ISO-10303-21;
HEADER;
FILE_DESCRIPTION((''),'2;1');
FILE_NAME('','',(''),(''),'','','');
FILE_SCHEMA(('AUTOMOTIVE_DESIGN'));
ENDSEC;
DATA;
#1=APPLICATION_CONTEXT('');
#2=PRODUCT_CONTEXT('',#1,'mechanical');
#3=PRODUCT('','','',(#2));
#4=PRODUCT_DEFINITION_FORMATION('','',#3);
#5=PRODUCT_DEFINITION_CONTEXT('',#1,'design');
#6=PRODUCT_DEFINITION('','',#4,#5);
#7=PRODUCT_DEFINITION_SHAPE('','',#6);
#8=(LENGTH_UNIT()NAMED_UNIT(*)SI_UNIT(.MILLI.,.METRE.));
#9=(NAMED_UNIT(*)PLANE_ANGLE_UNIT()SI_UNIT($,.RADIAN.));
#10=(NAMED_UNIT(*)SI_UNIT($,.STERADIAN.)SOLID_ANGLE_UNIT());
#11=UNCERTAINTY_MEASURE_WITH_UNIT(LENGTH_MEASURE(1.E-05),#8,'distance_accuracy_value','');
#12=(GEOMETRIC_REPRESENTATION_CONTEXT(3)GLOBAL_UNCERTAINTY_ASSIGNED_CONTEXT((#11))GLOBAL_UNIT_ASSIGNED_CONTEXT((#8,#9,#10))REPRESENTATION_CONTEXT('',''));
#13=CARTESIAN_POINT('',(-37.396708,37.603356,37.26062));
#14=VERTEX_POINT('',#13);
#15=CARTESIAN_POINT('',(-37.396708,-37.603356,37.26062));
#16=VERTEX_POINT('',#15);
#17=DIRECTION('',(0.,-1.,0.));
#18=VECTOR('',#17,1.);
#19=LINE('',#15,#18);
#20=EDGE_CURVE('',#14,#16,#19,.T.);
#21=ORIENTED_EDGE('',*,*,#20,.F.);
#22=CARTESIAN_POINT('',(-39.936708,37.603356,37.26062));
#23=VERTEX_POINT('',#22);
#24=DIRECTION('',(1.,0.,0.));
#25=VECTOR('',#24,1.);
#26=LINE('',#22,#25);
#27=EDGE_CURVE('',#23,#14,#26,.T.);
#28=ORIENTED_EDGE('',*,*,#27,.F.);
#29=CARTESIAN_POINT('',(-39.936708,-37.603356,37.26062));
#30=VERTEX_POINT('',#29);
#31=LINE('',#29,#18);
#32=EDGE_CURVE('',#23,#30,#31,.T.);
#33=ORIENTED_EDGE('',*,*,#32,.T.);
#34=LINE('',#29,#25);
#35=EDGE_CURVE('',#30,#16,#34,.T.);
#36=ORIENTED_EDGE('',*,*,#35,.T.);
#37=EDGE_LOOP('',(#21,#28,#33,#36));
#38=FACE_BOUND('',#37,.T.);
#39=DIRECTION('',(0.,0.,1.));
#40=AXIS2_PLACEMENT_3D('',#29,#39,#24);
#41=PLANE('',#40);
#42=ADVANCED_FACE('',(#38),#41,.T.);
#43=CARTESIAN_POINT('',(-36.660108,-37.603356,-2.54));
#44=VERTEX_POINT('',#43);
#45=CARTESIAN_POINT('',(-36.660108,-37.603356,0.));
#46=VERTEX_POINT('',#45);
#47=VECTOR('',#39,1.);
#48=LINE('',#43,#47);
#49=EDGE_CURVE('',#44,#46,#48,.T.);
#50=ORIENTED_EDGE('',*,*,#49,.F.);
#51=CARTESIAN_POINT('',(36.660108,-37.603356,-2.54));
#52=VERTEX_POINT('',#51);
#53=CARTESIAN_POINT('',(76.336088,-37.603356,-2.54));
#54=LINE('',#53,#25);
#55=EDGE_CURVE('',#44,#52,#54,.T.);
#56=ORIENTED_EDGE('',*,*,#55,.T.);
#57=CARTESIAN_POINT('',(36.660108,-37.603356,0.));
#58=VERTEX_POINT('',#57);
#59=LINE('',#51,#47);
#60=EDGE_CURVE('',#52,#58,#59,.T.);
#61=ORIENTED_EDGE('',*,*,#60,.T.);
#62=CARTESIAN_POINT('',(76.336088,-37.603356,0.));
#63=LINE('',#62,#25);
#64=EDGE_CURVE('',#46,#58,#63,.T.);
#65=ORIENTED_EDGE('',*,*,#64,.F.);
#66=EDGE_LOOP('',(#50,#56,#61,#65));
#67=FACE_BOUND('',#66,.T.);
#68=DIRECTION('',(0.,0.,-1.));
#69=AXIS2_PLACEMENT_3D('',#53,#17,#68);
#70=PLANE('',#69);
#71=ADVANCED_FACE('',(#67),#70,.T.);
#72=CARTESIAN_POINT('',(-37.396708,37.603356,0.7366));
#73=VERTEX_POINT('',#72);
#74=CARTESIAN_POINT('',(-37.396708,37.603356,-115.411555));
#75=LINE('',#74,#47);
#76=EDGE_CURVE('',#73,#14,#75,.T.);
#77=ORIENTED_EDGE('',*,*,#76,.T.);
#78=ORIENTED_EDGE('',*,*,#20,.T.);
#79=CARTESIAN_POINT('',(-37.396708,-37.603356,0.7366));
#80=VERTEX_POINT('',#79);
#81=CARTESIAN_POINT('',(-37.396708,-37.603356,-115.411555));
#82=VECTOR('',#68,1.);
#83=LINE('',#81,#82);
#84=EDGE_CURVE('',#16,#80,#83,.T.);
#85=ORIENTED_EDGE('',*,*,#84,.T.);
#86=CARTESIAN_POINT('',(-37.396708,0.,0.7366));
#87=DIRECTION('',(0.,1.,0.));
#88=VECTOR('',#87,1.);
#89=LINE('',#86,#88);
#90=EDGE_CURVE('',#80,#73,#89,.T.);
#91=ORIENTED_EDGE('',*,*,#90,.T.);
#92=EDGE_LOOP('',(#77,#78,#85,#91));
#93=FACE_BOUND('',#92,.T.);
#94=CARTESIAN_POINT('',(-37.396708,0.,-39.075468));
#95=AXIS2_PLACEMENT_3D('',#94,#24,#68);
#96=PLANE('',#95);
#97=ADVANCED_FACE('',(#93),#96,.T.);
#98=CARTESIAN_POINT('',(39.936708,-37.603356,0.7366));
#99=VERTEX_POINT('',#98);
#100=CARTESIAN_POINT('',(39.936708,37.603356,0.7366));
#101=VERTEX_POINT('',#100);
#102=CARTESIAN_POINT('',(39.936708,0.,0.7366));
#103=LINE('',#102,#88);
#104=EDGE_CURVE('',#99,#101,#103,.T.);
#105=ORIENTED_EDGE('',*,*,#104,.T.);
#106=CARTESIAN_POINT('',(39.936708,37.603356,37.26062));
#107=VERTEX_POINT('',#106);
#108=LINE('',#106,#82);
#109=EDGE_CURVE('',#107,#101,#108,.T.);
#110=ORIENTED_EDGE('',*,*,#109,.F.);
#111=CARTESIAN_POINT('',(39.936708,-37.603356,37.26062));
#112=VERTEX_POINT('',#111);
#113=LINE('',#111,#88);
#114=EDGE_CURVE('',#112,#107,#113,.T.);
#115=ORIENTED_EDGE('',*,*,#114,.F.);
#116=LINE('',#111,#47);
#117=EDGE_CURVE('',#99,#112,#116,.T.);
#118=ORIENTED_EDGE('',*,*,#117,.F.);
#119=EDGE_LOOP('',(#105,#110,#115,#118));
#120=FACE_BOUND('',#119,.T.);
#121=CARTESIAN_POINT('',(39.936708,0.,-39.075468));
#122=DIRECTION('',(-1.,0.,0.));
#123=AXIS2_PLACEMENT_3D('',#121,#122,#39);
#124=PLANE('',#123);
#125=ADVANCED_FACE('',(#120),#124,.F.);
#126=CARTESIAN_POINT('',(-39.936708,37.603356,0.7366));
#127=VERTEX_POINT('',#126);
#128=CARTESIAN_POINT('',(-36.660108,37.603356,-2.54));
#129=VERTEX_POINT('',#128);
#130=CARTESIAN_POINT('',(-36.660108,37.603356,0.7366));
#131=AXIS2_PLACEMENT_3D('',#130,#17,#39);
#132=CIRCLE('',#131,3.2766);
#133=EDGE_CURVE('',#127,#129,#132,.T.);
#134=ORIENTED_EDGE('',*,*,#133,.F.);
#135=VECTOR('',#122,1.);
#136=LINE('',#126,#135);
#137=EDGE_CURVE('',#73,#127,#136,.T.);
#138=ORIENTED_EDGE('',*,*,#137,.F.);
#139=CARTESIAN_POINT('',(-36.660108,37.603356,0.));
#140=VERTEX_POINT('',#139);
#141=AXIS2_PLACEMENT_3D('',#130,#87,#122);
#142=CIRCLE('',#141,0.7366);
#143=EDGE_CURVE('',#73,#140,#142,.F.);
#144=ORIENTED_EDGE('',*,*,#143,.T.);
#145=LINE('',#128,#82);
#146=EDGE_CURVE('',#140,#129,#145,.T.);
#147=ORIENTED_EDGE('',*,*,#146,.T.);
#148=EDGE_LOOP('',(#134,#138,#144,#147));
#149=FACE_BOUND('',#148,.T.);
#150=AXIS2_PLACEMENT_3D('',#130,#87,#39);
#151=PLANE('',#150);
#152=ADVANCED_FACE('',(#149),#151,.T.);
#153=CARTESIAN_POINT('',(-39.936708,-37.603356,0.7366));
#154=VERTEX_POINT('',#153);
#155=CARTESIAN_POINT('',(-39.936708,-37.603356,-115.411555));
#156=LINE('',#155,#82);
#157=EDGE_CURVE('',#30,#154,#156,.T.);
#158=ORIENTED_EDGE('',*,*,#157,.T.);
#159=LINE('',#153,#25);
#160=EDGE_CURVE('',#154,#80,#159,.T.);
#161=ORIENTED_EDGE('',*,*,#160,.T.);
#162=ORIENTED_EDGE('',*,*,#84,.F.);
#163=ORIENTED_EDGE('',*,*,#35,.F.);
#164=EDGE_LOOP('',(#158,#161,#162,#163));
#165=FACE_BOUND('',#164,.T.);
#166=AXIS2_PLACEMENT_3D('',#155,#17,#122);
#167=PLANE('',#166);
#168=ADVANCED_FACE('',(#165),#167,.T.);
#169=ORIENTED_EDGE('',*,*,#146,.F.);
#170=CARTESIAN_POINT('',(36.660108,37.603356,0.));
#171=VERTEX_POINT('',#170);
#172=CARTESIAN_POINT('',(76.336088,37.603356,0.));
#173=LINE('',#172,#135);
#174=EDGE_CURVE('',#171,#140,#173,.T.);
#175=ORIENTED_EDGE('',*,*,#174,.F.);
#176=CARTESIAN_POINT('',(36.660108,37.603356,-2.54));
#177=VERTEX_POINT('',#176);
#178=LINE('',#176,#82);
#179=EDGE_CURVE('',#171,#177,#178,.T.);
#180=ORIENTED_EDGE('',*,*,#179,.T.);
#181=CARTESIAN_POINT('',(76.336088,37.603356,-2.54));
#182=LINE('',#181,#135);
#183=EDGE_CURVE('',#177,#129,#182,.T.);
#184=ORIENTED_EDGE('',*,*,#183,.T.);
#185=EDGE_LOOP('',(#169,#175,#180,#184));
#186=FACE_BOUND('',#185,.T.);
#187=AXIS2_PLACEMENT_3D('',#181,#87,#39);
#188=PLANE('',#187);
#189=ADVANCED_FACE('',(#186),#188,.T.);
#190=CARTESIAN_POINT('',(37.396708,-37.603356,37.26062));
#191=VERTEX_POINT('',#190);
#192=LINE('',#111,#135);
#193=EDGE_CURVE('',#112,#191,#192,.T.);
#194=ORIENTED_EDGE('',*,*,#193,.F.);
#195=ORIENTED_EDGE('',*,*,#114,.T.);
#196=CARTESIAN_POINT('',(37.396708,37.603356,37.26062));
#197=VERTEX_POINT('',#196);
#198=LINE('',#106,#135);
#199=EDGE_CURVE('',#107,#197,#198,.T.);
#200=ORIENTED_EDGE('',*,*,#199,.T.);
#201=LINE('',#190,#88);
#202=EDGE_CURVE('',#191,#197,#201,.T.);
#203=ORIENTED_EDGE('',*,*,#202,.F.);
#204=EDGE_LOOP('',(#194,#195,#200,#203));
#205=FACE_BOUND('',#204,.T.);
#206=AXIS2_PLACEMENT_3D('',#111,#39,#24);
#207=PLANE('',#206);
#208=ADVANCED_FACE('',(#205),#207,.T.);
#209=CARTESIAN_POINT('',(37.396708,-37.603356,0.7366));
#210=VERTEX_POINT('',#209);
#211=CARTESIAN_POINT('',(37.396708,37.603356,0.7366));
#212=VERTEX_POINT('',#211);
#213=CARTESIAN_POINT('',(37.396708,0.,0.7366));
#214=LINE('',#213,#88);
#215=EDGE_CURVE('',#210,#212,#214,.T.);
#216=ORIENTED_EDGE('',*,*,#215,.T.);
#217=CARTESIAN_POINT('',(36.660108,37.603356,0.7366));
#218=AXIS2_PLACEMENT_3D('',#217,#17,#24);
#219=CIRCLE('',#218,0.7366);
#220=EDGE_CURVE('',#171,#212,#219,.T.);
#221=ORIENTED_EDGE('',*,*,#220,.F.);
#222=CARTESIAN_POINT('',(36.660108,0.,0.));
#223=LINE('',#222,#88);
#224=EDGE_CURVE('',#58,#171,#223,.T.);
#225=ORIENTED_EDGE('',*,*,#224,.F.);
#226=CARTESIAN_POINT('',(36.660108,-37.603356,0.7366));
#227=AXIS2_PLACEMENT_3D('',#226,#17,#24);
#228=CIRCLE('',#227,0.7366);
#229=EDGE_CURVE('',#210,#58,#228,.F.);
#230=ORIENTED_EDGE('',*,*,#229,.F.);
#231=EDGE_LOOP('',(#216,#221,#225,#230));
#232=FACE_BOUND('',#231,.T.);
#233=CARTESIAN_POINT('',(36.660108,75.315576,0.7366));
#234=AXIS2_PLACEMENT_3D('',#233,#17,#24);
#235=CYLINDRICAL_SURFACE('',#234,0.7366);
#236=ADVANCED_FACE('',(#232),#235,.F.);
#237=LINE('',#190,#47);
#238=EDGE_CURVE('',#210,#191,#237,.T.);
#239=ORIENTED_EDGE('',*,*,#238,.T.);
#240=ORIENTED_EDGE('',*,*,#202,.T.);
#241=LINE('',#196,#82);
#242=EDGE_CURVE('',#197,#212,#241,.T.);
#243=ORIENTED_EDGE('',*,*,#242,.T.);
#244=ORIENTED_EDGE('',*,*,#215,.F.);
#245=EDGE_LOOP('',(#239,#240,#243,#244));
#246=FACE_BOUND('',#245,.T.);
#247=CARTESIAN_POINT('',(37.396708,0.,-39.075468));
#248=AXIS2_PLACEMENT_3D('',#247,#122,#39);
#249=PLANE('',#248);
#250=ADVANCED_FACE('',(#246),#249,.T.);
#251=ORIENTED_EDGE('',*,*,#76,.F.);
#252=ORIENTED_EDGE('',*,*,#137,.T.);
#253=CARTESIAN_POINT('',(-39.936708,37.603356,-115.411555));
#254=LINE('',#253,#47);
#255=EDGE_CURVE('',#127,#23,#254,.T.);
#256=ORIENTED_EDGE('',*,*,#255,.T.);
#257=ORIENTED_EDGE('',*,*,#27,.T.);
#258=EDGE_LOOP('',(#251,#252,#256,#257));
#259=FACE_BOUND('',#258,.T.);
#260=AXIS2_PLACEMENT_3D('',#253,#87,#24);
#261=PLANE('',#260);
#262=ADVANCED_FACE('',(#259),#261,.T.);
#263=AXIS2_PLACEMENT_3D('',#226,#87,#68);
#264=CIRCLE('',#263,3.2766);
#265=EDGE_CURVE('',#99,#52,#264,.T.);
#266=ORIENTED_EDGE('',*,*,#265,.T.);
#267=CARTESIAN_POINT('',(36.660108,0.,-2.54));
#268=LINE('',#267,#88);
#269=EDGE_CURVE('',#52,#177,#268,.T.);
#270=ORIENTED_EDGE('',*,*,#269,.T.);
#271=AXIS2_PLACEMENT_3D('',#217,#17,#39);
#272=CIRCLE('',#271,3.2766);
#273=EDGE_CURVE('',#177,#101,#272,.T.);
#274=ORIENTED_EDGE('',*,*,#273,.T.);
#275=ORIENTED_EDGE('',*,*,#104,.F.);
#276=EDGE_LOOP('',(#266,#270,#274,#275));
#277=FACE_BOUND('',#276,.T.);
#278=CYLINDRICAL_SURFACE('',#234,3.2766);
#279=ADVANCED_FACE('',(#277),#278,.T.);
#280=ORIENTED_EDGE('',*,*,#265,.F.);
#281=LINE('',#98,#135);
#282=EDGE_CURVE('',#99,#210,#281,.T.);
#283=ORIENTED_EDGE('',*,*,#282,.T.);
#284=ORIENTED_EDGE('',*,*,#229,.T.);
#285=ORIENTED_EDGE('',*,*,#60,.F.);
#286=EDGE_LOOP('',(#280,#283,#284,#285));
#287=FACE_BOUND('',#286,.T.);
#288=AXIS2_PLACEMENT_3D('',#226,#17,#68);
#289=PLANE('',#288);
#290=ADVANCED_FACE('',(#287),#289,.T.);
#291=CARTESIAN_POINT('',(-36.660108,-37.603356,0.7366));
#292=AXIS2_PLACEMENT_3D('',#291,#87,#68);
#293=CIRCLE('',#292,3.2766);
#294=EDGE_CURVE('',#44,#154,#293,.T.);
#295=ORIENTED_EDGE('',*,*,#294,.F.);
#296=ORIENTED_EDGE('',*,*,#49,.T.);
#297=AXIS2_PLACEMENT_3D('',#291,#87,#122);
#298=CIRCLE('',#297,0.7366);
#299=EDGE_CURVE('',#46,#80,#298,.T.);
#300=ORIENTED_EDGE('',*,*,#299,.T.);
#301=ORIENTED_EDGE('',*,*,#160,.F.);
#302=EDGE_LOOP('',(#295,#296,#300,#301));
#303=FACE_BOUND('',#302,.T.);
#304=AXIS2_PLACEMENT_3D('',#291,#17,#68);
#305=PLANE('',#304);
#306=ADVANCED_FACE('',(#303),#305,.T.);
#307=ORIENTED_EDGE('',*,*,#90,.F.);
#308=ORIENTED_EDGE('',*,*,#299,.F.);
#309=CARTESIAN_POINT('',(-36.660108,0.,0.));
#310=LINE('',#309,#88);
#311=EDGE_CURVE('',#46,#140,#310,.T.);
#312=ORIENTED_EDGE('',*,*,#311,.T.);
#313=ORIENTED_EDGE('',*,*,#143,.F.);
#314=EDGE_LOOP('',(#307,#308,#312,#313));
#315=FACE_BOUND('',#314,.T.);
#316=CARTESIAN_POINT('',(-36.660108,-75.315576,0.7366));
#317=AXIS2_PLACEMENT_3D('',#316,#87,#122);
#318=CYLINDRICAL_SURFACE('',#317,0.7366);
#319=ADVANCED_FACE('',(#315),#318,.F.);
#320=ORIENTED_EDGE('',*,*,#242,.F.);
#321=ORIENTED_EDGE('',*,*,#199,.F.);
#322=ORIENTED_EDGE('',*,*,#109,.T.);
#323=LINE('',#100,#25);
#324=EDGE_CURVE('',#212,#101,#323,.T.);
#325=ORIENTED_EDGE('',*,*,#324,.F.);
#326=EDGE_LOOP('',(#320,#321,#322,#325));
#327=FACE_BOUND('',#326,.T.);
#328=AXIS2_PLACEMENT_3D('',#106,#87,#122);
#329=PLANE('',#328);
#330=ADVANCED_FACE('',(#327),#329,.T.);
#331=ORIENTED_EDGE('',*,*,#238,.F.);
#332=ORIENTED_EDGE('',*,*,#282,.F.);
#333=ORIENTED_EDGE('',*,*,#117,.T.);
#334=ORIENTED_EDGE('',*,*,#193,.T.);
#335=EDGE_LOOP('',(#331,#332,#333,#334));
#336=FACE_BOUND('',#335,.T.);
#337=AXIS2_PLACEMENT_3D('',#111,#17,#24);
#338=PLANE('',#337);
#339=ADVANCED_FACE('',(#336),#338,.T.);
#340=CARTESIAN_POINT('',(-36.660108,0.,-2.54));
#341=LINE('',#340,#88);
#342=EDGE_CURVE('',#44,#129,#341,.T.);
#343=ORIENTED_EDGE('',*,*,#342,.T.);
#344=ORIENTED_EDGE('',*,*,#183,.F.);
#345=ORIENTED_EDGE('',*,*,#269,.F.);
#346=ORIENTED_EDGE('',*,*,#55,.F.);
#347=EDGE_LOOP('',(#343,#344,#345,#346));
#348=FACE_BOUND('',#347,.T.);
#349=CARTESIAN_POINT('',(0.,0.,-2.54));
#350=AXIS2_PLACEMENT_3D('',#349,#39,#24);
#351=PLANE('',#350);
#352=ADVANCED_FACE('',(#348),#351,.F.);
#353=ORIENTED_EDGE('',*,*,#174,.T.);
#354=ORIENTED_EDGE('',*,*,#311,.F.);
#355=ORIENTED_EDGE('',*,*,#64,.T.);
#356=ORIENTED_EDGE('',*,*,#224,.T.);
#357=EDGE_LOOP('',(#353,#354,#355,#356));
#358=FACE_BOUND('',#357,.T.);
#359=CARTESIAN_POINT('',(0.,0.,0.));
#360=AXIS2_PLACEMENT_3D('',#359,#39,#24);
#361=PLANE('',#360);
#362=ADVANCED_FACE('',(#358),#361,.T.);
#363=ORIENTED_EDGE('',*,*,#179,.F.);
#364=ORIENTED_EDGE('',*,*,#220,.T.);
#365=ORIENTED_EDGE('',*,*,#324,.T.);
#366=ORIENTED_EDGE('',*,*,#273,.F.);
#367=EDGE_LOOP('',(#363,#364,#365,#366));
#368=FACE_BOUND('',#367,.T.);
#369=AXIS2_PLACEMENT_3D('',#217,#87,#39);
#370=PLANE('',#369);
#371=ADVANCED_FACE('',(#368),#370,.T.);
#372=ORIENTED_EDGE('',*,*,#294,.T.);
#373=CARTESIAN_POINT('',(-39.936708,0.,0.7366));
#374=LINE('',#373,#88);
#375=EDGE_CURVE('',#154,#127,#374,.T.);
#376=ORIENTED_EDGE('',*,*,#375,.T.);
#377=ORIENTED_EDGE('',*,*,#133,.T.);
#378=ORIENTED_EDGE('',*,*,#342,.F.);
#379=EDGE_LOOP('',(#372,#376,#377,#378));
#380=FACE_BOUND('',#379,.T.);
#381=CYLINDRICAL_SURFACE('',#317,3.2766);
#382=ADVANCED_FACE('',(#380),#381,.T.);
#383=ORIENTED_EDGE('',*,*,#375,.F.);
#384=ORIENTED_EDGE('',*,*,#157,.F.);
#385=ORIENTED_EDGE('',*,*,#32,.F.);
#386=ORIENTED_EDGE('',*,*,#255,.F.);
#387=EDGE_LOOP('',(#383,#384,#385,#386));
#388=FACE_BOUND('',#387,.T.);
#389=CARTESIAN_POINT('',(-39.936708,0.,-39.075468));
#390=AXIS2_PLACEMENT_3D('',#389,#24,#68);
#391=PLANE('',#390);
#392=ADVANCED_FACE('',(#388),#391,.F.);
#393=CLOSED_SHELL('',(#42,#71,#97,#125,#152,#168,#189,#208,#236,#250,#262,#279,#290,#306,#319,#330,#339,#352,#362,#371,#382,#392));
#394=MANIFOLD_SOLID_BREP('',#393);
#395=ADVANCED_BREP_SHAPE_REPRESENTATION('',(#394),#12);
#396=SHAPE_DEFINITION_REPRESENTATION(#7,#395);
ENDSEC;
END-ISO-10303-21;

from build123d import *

# Parameters (mm, degrees)
SKETCH1_W              = 152.672175124
SKETCH1_H              = 75.20671235
BASE_FLANGE1_DEPTH     = 2.54
SKETCHED_START         = -37.603356175
SKETCHED_BEND1_DEPTH   = 75.20671235
SKETCHED_BEND1_2_DEPTH = 75.20671235


# Read off the part's stored shape, not the designer's step: Sketched Bend1
# Sheet-metal steps are written as plain solids
with BuildPart() as part:
    # Sketch1 → Base-Flange1 (new body)
    with BuildSketch(Plane.XY):
        Rectangle(SKETCH1_W, SKETCH1_H)
    extrude(amount=-BASE_FLANGE1_DEPTH)

    # Sketched Bend1 outline → Sketched Bend1 (cut)
    with BuildSketch(Plane(origin=(0, 0, 0), x_dir=(1, 0, 0), z_dir=(0, 1, 0)).offset(SKETCHED_START)):
        with BuildLine():
            ThreePointArc((-39.8528381, 0), (-38.700029664, 1.827542266), (-36.660107607, 2.54))
            Line((-36.660107607, 2.54), (-76.336087562, 2.54))
            Line((-76.336087562, 2.54), (-76.336087562, 0))
            Line((-76.336087562, 0), (-39.8528381, 0))
        make_face()
        with BuildLine():
            Line((76.336087562, 2.54), (36.660107607, 2.54))
            ThreePointArc((36.660107607, 2.54), (38.700029664, 1.827542266), (39.8528381, 0))
            Line((39.8528381, 0), (76.336087562, 0))
            Line((76.336087562, 0), (76.336087562, 2.54))
        make_face()
    extrude(amount=SKETCHED_BEND1_DEPTH, mode=Mode.SUBTRACT)

    # Sketched Bend1 2 outline → Sketched Bend1 2 (add)
    with BuildSketch(Plane(origin=(0, 0, 0), x_dir=(1, 0, 0), z_dir=(0, 1, 0)).offset(SKETCHED_START)):
        with BuildLine():
            Line((-36.660107607, 0), (-39.8528381, 0))
            ThreePointArc((-39.8528381, 0), (-39.915672711, -0.365920336), (-39.936707607, -0.7366))
            Line((-39.936707607, -0.7366), (-39.936707607, -37.260620045))
            Line((-39.936707607, -37.260620045), (-37.396707607, -37.260620045))
            Line((-37.396707607, -37.260620045), (-37.396707607, -0.7366))
            ThreePointArc((-37.396707607, -0.7366), (-37.180962462, -0.215745145), (-36.660107607, 0))
        make_face()
        with BuildLine():
            ThreePointArc((39.936707607, -0.7366), (39.915672711, -0.365920336), (39.8528381, 0))
            Line((39.8528381, 0), (36.660107607, 0))
            ThreePointArc((36.660107607, 0), (37.180962462, -0.215745145), (37.396707607, -0.7366))
            Line((37.396707607, -0.7366), (37.396707607, -37.260620045))
            Line((37.396707607, -37.260620045), (39.936707607, -37.260620045))
            Line((39.936707607, -37.260620045), (39.936707607, -0.7366))
        make_face()
    extrude(amount=SKETCHED_BEND1_2_DEPTH)


solid = part.part
